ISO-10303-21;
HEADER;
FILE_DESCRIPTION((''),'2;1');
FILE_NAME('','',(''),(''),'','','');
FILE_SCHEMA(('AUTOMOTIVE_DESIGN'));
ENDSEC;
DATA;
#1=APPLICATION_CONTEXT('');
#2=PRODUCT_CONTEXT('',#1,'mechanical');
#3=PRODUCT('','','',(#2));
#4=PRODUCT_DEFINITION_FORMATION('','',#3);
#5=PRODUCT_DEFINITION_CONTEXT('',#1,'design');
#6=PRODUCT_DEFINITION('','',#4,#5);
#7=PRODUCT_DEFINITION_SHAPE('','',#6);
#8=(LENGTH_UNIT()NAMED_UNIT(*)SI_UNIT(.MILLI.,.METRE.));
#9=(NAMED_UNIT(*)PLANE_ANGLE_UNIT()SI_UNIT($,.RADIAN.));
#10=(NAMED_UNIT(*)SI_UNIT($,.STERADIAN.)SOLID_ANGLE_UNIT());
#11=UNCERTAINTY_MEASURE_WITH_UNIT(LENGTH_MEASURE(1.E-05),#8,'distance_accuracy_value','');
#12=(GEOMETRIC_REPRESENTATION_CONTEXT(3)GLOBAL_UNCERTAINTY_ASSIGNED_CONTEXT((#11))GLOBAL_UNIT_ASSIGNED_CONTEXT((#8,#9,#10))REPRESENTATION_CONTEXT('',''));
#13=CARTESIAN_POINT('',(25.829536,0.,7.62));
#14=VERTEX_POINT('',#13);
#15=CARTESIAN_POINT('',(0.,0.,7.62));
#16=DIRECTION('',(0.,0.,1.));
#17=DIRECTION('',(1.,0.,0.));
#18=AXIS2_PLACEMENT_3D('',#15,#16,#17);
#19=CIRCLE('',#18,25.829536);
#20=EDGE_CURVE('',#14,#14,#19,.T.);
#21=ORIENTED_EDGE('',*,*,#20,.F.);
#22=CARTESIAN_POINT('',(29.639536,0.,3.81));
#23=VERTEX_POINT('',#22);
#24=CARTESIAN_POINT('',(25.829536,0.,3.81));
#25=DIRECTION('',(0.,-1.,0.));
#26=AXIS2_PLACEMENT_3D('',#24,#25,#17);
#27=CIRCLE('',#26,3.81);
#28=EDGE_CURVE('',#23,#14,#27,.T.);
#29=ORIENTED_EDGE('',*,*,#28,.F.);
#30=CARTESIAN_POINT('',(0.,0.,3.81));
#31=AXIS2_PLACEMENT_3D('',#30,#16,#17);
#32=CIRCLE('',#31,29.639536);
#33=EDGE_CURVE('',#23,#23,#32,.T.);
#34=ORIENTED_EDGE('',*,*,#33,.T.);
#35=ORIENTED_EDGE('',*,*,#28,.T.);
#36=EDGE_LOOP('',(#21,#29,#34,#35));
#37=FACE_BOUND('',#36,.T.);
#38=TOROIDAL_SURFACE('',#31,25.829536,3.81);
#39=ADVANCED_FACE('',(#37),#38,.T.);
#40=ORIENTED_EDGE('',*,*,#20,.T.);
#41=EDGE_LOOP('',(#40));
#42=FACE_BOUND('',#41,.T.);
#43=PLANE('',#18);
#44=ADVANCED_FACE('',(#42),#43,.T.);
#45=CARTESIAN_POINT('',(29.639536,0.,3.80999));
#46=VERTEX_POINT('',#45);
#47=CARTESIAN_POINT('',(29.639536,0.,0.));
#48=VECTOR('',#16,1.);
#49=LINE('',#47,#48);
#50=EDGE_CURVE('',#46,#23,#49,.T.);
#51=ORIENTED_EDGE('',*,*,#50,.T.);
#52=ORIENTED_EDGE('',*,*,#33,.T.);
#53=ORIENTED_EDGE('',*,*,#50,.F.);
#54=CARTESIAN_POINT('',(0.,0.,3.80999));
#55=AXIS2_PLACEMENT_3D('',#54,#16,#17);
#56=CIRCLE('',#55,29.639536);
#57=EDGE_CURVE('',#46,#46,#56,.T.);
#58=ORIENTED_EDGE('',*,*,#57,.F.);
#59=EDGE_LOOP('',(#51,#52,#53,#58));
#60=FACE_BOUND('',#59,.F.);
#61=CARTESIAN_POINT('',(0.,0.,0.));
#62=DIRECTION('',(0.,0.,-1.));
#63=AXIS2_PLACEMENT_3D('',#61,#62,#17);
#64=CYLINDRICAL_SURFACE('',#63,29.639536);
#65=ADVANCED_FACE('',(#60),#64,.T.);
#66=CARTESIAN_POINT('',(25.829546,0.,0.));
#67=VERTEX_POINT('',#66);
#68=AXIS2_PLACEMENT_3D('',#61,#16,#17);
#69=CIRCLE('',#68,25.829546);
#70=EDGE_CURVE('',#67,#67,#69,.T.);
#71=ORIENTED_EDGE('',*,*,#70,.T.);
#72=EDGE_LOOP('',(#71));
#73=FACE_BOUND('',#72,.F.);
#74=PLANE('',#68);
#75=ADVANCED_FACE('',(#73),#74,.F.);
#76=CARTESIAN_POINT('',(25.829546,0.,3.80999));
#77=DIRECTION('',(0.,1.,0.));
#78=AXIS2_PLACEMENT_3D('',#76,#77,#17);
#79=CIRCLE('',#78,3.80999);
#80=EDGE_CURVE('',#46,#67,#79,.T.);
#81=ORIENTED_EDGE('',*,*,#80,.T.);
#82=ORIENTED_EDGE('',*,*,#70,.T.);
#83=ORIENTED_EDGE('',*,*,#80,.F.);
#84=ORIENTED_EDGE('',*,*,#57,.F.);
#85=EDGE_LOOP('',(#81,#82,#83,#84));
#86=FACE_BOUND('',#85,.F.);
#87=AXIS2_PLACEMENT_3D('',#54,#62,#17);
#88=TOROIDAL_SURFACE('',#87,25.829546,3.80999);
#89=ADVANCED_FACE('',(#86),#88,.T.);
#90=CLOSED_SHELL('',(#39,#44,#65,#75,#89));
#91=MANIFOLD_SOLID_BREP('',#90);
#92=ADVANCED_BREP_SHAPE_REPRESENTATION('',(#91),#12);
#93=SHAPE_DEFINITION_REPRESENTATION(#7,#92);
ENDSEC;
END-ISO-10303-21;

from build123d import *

# Parameters (mm, degrees)
F0_R     = 29.6395356571
F1_DEPTH = 7.62
F2_R     = 3.81
F3_R     = 3.80999


# Not quite as in the source:
# - a fillet or chamfer is up to 0.001 mm smaller than in the source, because OpenCascade refuses the exact size


with BuildPart() as f1:
    # F0 (on Top) → F1 (new body)
    with BuildSketch(Plane.XY):
        Circle(F0_R)
    extrude(amount=F1_DEPTH)

    # F2
    f2_edges = [f1.edges().sort_by_distance(p)[0] for p in [
        (-29.639536, 0, 7.62),
    ]]
    fillet(f2_edges, radius=F2_R)

    # F3 (radius 3.81 in the source; OpenCascade refuses exactly that, so slightly less here)
    f3_edges = [f1.edges().sort_by_distance(p)[0] for p in [
        (-29.639536, 0, 0),
    ]]
    fillet(f3_edges, radius=F3_R)


solid = f1.part
